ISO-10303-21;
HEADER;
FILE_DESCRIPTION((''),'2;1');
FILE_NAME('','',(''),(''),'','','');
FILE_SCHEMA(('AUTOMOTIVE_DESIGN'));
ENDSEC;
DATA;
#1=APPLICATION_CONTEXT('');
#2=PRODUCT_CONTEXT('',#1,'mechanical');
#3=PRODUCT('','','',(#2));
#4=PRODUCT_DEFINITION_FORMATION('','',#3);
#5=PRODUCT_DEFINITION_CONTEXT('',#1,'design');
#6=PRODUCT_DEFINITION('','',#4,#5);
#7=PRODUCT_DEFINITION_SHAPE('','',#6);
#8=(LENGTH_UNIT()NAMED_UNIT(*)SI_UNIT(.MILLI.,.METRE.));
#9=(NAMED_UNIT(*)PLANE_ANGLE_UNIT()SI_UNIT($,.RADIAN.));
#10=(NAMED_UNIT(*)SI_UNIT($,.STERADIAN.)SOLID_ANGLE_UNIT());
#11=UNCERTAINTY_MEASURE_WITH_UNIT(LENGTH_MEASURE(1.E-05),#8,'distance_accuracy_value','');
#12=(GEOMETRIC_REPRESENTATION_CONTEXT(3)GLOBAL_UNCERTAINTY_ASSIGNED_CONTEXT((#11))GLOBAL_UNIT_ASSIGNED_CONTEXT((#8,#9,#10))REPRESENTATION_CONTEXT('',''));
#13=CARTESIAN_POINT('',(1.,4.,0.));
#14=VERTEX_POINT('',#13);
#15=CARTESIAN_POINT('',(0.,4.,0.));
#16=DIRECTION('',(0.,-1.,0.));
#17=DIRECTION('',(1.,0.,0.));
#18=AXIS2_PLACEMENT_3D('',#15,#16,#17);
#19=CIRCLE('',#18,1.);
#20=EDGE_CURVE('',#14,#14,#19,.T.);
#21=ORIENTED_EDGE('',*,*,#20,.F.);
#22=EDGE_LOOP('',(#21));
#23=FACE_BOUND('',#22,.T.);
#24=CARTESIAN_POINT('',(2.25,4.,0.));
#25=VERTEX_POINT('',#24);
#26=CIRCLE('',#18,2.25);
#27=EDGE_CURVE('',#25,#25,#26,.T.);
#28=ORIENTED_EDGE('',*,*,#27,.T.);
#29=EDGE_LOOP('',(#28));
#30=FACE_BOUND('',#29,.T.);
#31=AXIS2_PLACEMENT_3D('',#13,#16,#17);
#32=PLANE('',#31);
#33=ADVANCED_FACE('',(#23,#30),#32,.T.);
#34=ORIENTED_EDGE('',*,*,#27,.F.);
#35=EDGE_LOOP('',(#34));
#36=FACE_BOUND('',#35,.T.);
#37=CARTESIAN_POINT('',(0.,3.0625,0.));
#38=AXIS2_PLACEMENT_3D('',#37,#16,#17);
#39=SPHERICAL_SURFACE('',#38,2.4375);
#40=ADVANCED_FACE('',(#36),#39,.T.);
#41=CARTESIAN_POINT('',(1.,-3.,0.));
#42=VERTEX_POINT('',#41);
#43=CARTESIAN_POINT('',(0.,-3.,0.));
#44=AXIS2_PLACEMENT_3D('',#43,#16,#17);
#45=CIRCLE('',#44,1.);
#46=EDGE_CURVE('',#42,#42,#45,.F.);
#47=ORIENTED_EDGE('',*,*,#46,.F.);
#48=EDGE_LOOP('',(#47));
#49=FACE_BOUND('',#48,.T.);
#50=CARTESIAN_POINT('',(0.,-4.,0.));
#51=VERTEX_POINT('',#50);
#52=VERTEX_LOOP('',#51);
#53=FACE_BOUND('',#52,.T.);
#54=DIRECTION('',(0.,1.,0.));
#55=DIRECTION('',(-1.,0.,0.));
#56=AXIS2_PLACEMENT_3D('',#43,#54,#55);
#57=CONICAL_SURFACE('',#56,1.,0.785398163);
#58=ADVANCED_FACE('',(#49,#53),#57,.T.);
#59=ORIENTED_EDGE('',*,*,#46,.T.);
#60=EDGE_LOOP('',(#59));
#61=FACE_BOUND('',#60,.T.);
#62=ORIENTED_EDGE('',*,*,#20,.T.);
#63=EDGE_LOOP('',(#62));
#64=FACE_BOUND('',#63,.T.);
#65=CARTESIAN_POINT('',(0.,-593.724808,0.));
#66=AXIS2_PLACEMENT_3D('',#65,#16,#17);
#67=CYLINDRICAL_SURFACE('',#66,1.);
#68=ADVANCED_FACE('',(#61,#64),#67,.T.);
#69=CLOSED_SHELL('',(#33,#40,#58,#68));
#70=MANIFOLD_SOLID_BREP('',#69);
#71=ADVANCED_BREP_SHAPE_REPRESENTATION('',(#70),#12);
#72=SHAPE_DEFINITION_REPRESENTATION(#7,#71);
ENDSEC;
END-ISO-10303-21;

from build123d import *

# Parameters (mm, degrees)
CHAMFER1_SIZE = 1


with BuildPart() as part:
    # Sketch1 → Revolve1 (revolve)
    with BuildSketch(Plane.XY):
        with BuildLine():
            Line((0, -4), (1, -4))
            Line((1, -4), (1, 4))
            Line((1, 4), (2.25, 4))
            ThreePointArc((2.25, 4), (1.352081728, 5.090622592), (0, 5.5))
            Line((0, 5.5), (0, -4))
        make_face()
    revolve(axis=Axis((0, -593.724808214, 0), (0, 1, 0)))

    # Chamfer1
    chamfer1_edges = [part.edges().sort_by_distance(p)[0] for p in [
        (-1, -4, 0),
    ]]
    chamfer(chamfer1_edges, length=CHAMFER1_SIZE - 0.0001)  # a hair under: the kernel refuses the full size


solid = part.part
